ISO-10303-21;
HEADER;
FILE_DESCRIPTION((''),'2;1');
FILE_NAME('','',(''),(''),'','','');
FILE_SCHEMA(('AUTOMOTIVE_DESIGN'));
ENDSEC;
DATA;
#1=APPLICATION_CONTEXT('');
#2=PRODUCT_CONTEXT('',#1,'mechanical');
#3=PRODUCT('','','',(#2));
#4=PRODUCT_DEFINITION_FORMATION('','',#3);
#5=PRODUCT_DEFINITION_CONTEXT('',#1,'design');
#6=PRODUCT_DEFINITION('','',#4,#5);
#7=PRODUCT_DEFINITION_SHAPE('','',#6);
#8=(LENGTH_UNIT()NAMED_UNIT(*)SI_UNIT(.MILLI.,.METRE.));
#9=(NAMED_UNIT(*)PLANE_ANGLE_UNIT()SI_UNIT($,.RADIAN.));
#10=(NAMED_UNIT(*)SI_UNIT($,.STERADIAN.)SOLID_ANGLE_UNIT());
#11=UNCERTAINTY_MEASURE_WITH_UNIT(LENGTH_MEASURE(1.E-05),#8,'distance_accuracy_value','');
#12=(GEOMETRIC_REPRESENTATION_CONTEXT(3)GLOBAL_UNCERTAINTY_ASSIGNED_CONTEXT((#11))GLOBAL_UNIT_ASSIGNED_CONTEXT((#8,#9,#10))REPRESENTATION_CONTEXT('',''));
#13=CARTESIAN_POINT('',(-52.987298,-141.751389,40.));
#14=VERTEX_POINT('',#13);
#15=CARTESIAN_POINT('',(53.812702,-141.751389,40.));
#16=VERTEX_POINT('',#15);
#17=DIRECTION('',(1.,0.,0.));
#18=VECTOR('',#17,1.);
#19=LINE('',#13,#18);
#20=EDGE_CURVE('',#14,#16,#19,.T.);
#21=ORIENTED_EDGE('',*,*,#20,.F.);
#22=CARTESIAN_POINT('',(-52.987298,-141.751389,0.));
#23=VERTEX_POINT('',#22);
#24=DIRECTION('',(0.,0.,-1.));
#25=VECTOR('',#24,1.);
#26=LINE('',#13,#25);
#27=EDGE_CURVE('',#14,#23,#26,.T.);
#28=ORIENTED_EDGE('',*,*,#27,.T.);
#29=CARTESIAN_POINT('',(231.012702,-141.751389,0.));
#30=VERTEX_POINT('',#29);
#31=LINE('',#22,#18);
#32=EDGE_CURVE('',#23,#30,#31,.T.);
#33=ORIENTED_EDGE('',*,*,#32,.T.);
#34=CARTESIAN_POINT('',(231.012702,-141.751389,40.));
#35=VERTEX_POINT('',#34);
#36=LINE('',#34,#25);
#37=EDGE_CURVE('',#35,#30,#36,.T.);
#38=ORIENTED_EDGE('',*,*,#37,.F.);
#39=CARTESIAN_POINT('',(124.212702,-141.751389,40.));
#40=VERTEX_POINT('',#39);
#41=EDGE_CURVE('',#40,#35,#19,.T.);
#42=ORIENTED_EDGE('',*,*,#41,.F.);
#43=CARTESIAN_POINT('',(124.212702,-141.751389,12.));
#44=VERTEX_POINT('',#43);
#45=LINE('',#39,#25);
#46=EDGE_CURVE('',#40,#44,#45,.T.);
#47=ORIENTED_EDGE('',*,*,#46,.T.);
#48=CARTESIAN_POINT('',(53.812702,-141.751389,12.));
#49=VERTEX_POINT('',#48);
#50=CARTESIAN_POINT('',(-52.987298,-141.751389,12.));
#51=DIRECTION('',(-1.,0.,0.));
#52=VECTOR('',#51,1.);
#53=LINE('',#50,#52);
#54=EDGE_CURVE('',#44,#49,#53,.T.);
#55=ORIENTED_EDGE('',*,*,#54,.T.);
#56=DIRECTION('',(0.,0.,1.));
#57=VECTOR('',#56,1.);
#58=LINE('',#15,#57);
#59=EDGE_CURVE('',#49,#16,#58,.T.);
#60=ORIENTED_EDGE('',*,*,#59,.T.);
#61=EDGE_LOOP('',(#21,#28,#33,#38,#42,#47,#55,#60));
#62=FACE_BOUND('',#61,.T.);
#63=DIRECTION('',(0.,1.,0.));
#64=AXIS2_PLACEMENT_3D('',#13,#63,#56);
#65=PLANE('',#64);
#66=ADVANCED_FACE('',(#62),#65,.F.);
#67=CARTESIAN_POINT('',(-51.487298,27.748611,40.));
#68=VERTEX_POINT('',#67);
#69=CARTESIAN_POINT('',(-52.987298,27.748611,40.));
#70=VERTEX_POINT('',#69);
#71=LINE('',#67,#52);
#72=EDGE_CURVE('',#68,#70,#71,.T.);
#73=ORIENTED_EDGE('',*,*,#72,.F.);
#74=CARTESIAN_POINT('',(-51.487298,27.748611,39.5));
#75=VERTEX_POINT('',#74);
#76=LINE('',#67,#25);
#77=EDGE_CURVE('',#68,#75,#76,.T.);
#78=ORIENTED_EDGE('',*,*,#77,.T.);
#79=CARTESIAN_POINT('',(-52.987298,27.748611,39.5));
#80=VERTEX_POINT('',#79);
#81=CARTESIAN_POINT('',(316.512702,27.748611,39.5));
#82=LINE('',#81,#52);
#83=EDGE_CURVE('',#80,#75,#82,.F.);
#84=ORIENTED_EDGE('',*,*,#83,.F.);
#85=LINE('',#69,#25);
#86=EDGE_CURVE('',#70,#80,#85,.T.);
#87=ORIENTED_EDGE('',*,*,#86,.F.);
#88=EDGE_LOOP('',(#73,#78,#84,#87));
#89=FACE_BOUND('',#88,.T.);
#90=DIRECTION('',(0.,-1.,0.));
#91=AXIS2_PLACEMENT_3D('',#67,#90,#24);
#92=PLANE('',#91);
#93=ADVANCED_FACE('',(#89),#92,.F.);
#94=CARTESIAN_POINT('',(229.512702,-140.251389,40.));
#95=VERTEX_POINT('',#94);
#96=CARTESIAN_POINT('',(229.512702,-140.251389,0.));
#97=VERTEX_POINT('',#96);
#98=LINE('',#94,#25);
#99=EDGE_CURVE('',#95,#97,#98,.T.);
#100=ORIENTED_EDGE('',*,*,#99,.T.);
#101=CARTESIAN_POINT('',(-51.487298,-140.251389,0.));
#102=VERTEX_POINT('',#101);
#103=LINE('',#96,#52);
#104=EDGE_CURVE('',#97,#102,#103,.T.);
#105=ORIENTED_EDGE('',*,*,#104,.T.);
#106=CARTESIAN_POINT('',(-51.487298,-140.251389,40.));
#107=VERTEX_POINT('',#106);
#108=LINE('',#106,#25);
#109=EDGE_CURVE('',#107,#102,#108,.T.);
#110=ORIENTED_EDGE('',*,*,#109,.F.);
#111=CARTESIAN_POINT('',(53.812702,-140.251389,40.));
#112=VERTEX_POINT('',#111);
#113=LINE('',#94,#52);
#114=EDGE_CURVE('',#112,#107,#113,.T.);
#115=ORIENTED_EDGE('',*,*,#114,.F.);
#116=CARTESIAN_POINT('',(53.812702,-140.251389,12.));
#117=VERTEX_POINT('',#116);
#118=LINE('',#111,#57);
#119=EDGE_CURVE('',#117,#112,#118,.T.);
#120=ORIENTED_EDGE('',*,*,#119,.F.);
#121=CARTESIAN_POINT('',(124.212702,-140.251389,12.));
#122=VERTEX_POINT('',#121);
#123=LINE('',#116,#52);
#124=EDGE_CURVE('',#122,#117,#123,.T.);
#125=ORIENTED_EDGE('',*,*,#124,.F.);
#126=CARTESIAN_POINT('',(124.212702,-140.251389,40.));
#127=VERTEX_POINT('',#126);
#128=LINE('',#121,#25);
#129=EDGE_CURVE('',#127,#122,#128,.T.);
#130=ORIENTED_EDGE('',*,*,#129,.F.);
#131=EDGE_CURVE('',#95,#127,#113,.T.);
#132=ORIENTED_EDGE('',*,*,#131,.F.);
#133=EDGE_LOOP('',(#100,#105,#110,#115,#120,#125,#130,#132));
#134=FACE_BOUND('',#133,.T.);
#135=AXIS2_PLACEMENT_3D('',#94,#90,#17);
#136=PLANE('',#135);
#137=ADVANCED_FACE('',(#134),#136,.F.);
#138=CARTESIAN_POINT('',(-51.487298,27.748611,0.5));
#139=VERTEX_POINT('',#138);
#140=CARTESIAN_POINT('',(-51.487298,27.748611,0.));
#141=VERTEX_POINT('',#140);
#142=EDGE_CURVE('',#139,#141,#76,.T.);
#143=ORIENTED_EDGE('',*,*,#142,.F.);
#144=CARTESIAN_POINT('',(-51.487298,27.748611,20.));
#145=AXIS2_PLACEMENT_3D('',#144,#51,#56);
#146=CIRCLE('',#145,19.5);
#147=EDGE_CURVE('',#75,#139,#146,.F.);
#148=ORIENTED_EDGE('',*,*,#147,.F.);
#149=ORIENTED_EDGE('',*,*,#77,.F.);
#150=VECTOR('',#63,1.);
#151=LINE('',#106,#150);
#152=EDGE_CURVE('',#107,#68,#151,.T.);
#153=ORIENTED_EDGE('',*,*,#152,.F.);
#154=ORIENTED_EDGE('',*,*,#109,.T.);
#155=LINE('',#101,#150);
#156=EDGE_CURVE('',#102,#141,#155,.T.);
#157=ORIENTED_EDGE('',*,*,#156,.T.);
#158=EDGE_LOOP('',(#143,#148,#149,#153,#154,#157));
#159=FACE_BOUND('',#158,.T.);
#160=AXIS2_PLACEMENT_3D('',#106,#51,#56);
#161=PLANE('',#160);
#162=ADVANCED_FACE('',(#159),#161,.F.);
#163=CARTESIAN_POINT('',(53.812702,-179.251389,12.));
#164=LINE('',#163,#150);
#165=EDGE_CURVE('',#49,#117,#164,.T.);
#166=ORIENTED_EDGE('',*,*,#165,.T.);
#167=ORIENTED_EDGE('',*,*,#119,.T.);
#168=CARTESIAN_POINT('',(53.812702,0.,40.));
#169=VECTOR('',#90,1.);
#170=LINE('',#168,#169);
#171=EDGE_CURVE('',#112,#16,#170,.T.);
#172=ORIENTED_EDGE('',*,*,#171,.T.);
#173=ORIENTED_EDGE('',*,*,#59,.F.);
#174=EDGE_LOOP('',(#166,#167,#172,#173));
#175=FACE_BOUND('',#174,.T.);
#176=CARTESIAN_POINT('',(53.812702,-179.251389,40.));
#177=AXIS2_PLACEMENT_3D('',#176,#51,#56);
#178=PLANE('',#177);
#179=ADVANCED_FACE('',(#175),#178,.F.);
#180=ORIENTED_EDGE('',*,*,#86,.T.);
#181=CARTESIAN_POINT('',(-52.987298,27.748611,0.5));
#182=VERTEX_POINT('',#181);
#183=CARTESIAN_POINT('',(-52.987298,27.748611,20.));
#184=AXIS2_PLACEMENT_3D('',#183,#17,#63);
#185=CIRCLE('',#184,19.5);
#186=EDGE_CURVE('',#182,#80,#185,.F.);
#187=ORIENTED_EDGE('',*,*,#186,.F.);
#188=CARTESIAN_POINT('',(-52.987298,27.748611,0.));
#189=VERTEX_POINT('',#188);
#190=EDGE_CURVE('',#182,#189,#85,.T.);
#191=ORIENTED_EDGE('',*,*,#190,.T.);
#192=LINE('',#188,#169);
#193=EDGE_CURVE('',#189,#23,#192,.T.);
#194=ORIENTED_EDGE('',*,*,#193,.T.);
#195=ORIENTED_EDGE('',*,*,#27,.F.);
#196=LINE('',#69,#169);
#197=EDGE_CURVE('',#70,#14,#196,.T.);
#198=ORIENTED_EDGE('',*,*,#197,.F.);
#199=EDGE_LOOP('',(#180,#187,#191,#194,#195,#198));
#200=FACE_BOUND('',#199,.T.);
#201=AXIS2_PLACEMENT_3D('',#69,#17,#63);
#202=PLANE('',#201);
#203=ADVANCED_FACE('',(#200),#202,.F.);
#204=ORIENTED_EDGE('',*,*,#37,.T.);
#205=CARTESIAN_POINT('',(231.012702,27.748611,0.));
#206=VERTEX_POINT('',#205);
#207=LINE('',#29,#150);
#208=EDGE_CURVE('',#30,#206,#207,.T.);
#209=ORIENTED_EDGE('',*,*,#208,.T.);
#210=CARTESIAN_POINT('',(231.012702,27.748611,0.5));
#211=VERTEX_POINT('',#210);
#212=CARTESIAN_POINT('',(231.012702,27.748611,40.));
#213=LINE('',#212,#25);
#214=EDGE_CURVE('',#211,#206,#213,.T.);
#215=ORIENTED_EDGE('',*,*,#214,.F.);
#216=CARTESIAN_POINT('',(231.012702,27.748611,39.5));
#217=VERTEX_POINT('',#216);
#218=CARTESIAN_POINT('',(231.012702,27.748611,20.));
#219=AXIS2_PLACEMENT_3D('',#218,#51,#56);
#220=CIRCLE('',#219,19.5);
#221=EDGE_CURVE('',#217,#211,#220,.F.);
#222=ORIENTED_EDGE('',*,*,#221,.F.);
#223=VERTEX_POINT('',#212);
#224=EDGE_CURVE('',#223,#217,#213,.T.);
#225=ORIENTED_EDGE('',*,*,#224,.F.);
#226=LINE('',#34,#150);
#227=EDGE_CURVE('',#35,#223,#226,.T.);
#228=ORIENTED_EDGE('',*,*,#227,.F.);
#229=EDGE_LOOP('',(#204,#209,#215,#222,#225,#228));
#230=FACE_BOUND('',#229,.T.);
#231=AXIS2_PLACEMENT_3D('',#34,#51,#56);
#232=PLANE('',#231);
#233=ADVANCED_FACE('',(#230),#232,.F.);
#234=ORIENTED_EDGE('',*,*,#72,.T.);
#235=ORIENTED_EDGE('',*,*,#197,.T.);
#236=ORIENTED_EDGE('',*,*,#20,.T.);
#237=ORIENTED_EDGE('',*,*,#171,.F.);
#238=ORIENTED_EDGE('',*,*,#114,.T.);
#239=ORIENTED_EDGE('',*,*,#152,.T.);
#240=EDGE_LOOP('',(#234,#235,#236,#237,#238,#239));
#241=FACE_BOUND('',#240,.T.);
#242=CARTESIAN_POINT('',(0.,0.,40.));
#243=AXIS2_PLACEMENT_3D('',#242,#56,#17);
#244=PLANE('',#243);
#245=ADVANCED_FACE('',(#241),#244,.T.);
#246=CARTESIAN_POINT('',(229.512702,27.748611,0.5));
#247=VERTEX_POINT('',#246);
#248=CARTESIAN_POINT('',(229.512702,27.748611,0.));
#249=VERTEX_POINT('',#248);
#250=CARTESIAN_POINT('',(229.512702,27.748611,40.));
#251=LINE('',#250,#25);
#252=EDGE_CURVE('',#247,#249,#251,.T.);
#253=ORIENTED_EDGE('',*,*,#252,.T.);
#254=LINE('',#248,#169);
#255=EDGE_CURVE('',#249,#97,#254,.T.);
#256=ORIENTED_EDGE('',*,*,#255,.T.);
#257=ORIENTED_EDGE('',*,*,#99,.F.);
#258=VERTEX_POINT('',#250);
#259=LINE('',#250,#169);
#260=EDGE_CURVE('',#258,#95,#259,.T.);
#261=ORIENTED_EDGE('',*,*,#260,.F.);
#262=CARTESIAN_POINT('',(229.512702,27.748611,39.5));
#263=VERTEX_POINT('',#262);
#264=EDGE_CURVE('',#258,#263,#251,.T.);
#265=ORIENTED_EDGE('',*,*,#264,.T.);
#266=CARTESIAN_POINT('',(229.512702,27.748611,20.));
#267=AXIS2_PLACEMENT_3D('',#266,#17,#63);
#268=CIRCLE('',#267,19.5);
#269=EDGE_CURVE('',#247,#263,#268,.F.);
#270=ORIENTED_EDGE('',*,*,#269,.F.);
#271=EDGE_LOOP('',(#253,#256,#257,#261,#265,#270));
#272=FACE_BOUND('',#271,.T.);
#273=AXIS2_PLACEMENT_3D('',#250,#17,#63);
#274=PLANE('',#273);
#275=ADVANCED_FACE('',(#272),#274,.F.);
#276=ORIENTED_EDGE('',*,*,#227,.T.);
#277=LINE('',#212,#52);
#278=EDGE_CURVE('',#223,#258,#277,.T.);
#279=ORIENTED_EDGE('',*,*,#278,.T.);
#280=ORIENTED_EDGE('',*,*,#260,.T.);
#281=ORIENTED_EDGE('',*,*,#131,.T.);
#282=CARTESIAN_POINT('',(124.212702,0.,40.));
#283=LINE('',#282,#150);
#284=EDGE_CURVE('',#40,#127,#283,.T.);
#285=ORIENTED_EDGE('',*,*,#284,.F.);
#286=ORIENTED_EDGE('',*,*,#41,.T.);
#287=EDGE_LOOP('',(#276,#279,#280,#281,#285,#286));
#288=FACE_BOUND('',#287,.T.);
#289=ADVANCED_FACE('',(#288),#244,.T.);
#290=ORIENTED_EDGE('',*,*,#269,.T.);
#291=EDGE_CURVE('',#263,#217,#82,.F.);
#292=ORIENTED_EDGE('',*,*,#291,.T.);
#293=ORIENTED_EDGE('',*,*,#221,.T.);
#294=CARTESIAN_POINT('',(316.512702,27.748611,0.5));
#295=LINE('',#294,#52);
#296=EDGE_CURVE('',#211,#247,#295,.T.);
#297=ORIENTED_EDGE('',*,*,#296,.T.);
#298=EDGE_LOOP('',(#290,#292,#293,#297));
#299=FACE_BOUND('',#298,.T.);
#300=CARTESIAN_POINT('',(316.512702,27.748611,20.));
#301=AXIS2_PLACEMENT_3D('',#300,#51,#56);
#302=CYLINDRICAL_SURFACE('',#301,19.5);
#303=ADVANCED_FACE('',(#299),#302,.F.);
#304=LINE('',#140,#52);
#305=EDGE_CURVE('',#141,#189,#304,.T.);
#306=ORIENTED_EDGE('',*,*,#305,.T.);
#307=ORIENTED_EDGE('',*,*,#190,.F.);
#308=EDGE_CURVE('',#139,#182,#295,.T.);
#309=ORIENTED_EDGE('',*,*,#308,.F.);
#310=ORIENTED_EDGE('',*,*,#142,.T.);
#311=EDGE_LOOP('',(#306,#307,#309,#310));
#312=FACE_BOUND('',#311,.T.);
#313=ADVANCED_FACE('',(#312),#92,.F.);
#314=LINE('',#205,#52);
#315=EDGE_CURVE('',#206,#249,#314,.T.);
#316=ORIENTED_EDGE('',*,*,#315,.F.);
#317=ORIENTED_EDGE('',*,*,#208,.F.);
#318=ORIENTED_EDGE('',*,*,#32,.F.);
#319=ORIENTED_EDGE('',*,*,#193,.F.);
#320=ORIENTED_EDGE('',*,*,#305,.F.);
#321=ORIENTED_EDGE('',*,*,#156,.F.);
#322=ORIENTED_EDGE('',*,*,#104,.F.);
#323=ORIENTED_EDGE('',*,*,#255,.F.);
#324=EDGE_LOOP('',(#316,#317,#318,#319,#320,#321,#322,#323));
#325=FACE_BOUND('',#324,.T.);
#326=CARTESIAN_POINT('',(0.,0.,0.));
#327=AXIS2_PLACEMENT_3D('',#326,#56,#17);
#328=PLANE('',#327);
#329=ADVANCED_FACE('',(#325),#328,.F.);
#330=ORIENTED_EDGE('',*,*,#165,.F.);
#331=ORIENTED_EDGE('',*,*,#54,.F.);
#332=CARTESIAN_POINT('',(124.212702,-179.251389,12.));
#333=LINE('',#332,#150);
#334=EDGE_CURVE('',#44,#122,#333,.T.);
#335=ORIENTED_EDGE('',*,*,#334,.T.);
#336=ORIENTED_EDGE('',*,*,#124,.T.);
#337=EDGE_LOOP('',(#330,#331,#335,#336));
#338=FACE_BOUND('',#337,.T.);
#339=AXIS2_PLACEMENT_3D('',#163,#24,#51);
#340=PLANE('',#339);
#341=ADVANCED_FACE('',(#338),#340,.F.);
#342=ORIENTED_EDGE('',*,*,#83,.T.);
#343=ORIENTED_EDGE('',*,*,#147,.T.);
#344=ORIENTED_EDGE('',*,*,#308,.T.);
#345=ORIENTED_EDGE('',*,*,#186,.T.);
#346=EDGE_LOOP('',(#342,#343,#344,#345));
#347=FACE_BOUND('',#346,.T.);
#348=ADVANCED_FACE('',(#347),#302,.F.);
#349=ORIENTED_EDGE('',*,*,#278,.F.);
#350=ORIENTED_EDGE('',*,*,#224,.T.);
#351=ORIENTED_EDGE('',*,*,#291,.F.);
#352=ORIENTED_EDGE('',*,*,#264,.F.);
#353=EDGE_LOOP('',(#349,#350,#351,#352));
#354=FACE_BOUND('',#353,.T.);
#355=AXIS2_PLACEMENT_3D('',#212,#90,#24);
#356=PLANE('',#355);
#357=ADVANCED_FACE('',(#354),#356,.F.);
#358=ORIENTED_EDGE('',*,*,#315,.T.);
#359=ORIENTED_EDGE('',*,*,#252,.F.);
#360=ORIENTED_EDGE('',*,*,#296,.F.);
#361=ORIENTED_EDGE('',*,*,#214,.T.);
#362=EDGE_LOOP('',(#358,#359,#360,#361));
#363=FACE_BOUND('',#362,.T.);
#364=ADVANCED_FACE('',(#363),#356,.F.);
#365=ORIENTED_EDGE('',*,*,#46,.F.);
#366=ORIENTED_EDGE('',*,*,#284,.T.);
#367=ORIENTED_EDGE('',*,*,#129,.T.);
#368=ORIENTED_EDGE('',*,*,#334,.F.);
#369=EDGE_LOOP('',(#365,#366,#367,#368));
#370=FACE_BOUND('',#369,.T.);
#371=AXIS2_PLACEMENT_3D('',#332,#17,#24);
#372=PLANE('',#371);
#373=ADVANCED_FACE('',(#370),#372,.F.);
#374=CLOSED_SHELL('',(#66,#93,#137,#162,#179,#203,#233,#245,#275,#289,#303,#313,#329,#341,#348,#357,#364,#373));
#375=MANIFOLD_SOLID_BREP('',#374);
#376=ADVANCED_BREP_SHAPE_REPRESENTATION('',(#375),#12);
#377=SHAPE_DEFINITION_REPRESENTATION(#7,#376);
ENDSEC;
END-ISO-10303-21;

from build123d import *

# Parameters (mm, degrees)
EXTRUDE_1_DEPTH          = 40
CUT_EXTRUDE_1_DEPTH      = 368
CUT_EXTRUDE_1_DEPTH_BACK = 39
SKETCH_2_R               = 19.5
CUT_EXTRUDE_2_DEPTH      = 39


with BuildPart() as part:
    # 草图1 → 凸台-拉伸1 (new body)
    with BuildSketch(Plane.XY):
        Polygon((-52.98729817, 27.74861141), (-52.98729817, -141.75138859), (231.01270183, -141.75138859), (231.01270183, 27.74861141), (229.51270183, 27.74861141), (229.51270183, -140.25138859), (-51.48729817, -140.25138859), (-51.48729817, 27.74861141), align=None)
    extrude(amount=EXTRUDE_1_DEPTH)

    # 草图2 → 切除-拉伸1 (cut, two sides: drawn at the far end of the back side and taken through both)
    with BuildSketch(Plane(origin=(-51.48729817, 0, 0), x_dir=(0, 0, -1), z_dir=(1, 0, 0)).offset(-CUT_EXTRUDE_1_DEPTH_BACK)):
        with Locations((-20, 27.74861141)):
            Circle(SKETCH_2_R)
    extrude(amount=CUT_EXTRUDE_1_DEPTH + CUT_EXTRUDE_1_DEPTH_BACK, mode=Mode.SUBTRACT)

    # 草图4 → 切除-拉伸2 (cut)
    with BuildSketch(Plane(origin=(0, -140.25138859, 0), x_dir=(1, 0, 0), z_dir=(0, 1, 0))):
        Polygon((89.01270183, -40), (53.81270183, -40), (53.81270183, -12), (89.01270183, -12), (124.21270183, -12), (124.21270183, -40), align=None)
    extrude(amount=-CUT_EXTRUDE_2_DEPTH, mode=Mode.SUBTRACT)


solid = part.part
